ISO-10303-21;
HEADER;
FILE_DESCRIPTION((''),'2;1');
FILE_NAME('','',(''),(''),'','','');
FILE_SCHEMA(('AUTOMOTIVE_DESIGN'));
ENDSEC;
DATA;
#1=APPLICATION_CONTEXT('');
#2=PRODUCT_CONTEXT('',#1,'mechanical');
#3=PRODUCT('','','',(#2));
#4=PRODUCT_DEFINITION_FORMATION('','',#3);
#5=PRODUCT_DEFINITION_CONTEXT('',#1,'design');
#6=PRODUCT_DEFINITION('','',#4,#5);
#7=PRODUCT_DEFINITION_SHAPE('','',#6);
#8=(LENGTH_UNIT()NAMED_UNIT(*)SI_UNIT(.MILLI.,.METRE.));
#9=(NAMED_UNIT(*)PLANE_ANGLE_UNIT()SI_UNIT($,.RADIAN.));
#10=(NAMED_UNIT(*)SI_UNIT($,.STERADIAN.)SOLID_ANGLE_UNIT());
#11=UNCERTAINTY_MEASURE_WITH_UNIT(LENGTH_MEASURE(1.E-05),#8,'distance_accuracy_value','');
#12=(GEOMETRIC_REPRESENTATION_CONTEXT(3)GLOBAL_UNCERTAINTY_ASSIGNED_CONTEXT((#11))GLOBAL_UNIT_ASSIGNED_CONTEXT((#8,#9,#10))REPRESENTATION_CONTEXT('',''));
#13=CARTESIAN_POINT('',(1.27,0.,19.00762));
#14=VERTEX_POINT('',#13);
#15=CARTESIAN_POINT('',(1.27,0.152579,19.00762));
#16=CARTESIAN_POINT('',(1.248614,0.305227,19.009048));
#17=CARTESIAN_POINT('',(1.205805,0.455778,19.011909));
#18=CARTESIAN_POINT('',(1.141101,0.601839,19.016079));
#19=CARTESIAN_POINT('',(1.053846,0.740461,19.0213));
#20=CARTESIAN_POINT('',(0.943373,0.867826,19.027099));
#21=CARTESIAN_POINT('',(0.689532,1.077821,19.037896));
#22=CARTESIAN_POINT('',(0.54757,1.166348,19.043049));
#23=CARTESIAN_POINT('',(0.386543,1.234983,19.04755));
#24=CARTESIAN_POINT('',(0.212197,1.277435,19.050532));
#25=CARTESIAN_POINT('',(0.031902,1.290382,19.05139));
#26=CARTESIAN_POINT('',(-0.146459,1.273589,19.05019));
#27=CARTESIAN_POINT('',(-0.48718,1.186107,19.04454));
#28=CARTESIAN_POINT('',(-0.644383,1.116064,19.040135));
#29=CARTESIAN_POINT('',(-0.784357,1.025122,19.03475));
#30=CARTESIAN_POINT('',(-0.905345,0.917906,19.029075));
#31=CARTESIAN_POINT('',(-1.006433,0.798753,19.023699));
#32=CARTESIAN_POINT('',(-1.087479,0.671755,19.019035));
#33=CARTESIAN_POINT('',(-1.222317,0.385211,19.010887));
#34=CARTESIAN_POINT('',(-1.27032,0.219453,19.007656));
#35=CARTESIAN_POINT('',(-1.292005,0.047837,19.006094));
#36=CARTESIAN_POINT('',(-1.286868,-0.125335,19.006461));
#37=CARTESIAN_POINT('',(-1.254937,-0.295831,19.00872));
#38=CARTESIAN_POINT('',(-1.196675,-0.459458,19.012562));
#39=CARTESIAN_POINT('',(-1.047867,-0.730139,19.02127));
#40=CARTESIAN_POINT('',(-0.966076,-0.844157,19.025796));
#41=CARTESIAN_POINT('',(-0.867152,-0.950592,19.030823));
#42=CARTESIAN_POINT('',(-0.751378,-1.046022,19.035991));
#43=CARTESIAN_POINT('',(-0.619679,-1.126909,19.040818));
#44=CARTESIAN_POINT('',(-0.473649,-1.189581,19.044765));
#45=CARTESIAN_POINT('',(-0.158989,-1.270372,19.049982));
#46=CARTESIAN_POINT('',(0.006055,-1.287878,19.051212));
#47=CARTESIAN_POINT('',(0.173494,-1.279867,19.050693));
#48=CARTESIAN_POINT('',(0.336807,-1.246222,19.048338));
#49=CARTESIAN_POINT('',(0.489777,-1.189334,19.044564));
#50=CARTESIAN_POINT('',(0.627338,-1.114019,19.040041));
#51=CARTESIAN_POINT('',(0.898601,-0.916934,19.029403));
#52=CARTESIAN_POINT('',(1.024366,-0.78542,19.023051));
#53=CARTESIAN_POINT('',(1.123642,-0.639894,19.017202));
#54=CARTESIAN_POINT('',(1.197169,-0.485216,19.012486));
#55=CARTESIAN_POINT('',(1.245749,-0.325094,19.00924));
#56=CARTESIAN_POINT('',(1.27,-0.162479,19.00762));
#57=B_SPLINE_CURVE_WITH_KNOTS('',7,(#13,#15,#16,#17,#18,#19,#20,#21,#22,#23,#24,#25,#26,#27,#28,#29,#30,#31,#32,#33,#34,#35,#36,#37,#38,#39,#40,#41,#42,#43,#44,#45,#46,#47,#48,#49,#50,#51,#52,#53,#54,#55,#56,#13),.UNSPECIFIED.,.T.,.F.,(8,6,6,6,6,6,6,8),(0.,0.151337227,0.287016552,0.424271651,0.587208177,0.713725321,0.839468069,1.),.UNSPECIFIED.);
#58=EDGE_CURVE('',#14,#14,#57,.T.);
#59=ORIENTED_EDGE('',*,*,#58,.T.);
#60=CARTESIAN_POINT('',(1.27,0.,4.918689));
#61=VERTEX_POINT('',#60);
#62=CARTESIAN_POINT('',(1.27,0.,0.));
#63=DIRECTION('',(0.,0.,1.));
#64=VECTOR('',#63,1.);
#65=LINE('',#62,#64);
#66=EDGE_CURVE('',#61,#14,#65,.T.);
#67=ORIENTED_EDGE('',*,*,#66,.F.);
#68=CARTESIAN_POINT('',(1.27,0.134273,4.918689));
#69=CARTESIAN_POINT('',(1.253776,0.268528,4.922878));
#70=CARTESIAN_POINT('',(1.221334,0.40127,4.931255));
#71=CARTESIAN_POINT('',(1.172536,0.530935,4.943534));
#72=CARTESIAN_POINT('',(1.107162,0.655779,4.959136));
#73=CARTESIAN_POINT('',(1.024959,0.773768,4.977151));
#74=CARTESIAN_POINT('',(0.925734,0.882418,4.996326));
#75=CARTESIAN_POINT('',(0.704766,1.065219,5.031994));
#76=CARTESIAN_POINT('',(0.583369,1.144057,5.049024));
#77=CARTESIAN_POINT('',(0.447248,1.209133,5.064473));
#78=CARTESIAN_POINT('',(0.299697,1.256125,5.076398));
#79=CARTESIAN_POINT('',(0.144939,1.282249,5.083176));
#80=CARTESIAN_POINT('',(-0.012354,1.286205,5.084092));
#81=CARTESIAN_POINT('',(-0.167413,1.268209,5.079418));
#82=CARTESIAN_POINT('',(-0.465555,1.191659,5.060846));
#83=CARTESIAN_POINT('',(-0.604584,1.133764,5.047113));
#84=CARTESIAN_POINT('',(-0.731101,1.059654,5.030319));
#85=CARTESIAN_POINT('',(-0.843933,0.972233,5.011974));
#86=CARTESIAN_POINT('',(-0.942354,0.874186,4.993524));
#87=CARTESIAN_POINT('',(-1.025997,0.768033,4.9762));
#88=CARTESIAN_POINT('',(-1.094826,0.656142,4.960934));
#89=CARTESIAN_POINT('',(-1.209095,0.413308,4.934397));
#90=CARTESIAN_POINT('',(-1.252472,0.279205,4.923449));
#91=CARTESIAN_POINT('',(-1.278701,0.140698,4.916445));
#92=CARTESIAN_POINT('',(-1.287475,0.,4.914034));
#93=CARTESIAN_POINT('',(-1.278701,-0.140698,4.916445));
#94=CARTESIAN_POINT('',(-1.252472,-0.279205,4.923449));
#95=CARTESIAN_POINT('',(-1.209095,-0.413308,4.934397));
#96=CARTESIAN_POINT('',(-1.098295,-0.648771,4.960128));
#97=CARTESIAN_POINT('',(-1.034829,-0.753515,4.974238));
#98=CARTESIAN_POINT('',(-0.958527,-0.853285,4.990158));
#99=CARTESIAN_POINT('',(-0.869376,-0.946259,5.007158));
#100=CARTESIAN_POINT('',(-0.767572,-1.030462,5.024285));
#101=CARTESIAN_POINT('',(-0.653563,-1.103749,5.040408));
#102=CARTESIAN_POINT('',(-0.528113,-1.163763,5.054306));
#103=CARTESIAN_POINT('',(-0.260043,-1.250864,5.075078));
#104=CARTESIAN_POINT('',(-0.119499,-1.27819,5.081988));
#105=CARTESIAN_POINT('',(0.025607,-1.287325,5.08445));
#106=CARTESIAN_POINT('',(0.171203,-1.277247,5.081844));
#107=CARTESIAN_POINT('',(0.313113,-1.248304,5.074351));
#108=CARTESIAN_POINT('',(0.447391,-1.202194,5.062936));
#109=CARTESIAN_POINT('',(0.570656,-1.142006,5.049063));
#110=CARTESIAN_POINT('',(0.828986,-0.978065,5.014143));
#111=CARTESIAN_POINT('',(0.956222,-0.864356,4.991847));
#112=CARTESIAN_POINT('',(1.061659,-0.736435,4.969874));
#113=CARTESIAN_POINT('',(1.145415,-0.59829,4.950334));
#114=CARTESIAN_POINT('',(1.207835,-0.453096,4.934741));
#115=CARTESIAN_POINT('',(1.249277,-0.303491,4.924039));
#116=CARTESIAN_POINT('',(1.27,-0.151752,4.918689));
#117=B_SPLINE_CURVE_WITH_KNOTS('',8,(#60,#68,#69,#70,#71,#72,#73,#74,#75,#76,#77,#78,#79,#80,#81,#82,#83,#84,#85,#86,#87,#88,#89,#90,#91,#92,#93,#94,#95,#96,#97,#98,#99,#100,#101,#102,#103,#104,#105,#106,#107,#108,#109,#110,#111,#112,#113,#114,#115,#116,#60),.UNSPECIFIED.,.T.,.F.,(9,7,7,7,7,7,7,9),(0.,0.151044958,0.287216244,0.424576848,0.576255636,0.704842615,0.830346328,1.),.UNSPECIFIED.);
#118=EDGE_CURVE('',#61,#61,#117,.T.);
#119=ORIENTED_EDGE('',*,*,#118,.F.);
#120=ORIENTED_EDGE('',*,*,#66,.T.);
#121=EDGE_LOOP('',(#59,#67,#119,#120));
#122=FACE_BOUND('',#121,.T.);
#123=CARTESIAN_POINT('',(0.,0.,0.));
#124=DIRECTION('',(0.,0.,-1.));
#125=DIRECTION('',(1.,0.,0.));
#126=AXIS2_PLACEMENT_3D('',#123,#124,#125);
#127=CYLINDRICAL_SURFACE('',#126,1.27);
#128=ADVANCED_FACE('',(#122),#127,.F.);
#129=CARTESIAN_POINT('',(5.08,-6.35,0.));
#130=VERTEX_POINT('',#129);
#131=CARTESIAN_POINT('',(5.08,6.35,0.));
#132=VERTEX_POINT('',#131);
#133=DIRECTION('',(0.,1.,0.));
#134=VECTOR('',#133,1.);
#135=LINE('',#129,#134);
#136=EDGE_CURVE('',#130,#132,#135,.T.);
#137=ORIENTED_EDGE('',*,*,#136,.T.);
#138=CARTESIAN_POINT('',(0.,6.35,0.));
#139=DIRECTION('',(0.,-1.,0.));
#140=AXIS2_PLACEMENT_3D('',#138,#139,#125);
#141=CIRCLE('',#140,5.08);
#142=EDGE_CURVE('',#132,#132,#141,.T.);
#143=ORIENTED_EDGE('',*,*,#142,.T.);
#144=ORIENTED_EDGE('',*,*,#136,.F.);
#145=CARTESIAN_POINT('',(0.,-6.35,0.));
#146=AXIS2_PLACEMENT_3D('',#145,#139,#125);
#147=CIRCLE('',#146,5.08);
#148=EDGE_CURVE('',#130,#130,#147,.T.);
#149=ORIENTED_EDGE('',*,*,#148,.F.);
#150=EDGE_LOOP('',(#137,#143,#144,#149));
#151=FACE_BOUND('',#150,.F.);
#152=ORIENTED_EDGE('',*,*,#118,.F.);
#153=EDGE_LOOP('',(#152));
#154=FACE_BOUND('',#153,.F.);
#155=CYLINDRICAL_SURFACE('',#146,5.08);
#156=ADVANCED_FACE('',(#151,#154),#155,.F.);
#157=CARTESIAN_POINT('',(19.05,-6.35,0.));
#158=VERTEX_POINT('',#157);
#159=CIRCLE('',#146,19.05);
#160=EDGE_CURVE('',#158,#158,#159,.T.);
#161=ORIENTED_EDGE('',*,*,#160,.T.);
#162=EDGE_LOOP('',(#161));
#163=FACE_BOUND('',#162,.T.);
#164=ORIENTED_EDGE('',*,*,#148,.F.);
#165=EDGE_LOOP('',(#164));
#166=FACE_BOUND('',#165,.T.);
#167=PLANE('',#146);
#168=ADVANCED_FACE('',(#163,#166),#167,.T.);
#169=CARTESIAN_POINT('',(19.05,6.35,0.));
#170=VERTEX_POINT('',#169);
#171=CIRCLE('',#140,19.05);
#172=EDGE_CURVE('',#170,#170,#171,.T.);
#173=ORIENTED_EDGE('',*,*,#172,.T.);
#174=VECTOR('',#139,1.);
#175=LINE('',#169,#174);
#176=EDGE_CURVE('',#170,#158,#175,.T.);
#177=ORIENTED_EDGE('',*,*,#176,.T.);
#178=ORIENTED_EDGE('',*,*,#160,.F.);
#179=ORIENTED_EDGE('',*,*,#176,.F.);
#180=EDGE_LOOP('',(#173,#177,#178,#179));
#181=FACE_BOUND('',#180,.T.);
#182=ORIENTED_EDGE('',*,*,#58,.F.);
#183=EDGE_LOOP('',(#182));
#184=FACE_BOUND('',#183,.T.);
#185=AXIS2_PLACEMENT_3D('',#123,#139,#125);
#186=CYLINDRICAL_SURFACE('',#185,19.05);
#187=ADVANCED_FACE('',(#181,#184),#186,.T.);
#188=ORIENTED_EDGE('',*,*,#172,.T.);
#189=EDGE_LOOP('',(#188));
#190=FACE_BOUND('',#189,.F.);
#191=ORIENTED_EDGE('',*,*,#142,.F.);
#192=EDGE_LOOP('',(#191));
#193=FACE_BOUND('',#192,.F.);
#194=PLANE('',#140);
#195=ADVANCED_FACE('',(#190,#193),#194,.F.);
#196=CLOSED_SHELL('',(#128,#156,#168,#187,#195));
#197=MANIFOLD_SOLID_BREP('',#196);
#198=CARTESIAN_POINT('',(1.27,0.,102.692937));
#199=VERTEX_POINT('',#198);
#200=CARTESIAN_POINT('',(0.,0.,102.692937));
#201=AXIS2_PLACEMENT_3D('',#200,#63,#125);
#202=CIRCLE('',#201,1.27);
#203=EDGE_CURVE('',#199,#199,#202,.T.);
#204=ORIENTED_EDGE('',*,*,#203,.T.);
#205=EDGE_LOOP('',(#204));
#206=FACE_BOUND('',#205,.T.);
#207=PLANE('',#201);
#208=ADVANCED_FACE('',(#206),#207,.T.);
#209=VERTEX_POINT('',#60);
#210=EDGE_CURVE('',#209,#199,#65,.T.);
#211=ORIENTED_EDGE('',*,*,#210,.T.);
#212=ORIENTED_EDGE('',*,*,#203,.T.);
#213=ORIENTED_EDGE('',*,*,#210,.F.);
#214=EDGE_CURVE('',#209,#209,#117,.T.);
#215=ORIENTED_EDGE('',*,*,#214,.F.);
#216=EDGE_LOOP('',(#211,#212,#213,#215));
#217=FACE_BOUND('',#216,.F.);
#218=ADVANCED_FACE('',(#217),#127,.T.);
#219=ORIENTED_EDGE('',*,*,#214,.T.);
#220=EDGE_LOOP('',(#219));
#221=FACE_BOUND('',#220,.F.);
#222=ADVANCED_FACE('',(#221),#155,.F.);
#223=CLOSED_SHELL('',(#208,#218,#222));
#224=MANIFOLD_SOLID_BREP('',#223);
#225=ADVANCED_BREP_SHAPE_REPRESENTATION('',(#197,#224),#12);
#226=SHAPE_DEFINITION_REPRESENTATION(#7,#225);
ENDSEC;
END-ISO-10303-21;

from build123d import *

# Parameters (mm, degrees)
F3_R     = 19.05
F4_DEPTH = 6.35
F5_R     = 1.27
F6_DEPTH = 102.6929366
F7_R     = 5.08
F8_DEPTH = 12.701
F9_DEPTH = 109.0429366


# Not quite as in the source:
# - the program builds the solid bodies; features that only make, move or delete a surface that nothing else refers to are left out


with BuildPart() as f4:
    # F3 (on face) → F4 (new body, symmetric)
    with BuildSketch(Plane.XZ):
        Circle(F3_R)
    extrude(amount=F4_DEPTH, both=True)


with BuildPart() as f6:
    # F5 (on Top) → F6 (new body)
    with BuildSketch(Plane.XY):
        Circle(F5_R)
    extrude(amount=F6_DEPTH)


with BuildPart() as f8_tool:
    # F7 (on face) → F8 (new body, through all)
    with BuildSketch(Plane.XZ.offset(6.35)):
        Circle(F7_R)
    extrude(amount=-F8_DEPTH)


with BuildPart() as f4_1:
    add(f4.part)

    # F8: cut by f8_tool
    add(f8_tool.part, mode=Mode.SUBTRACT)

    # F5 (on Top) → F9 (cut)
    with BuildSketch(Plane.XY):
        Circle(F5_R)
    extrude(amount=F9_DEPTH, mode=Mode.SUBTRACT)


with BuildPart() as f6_1:
    add(f6.part)

    # F8: cut by f8_tool
    add(f8_tool.part, mode=Mode.SUBTRACT)


solid = Compound([f4_1.part, f6_1.part])
